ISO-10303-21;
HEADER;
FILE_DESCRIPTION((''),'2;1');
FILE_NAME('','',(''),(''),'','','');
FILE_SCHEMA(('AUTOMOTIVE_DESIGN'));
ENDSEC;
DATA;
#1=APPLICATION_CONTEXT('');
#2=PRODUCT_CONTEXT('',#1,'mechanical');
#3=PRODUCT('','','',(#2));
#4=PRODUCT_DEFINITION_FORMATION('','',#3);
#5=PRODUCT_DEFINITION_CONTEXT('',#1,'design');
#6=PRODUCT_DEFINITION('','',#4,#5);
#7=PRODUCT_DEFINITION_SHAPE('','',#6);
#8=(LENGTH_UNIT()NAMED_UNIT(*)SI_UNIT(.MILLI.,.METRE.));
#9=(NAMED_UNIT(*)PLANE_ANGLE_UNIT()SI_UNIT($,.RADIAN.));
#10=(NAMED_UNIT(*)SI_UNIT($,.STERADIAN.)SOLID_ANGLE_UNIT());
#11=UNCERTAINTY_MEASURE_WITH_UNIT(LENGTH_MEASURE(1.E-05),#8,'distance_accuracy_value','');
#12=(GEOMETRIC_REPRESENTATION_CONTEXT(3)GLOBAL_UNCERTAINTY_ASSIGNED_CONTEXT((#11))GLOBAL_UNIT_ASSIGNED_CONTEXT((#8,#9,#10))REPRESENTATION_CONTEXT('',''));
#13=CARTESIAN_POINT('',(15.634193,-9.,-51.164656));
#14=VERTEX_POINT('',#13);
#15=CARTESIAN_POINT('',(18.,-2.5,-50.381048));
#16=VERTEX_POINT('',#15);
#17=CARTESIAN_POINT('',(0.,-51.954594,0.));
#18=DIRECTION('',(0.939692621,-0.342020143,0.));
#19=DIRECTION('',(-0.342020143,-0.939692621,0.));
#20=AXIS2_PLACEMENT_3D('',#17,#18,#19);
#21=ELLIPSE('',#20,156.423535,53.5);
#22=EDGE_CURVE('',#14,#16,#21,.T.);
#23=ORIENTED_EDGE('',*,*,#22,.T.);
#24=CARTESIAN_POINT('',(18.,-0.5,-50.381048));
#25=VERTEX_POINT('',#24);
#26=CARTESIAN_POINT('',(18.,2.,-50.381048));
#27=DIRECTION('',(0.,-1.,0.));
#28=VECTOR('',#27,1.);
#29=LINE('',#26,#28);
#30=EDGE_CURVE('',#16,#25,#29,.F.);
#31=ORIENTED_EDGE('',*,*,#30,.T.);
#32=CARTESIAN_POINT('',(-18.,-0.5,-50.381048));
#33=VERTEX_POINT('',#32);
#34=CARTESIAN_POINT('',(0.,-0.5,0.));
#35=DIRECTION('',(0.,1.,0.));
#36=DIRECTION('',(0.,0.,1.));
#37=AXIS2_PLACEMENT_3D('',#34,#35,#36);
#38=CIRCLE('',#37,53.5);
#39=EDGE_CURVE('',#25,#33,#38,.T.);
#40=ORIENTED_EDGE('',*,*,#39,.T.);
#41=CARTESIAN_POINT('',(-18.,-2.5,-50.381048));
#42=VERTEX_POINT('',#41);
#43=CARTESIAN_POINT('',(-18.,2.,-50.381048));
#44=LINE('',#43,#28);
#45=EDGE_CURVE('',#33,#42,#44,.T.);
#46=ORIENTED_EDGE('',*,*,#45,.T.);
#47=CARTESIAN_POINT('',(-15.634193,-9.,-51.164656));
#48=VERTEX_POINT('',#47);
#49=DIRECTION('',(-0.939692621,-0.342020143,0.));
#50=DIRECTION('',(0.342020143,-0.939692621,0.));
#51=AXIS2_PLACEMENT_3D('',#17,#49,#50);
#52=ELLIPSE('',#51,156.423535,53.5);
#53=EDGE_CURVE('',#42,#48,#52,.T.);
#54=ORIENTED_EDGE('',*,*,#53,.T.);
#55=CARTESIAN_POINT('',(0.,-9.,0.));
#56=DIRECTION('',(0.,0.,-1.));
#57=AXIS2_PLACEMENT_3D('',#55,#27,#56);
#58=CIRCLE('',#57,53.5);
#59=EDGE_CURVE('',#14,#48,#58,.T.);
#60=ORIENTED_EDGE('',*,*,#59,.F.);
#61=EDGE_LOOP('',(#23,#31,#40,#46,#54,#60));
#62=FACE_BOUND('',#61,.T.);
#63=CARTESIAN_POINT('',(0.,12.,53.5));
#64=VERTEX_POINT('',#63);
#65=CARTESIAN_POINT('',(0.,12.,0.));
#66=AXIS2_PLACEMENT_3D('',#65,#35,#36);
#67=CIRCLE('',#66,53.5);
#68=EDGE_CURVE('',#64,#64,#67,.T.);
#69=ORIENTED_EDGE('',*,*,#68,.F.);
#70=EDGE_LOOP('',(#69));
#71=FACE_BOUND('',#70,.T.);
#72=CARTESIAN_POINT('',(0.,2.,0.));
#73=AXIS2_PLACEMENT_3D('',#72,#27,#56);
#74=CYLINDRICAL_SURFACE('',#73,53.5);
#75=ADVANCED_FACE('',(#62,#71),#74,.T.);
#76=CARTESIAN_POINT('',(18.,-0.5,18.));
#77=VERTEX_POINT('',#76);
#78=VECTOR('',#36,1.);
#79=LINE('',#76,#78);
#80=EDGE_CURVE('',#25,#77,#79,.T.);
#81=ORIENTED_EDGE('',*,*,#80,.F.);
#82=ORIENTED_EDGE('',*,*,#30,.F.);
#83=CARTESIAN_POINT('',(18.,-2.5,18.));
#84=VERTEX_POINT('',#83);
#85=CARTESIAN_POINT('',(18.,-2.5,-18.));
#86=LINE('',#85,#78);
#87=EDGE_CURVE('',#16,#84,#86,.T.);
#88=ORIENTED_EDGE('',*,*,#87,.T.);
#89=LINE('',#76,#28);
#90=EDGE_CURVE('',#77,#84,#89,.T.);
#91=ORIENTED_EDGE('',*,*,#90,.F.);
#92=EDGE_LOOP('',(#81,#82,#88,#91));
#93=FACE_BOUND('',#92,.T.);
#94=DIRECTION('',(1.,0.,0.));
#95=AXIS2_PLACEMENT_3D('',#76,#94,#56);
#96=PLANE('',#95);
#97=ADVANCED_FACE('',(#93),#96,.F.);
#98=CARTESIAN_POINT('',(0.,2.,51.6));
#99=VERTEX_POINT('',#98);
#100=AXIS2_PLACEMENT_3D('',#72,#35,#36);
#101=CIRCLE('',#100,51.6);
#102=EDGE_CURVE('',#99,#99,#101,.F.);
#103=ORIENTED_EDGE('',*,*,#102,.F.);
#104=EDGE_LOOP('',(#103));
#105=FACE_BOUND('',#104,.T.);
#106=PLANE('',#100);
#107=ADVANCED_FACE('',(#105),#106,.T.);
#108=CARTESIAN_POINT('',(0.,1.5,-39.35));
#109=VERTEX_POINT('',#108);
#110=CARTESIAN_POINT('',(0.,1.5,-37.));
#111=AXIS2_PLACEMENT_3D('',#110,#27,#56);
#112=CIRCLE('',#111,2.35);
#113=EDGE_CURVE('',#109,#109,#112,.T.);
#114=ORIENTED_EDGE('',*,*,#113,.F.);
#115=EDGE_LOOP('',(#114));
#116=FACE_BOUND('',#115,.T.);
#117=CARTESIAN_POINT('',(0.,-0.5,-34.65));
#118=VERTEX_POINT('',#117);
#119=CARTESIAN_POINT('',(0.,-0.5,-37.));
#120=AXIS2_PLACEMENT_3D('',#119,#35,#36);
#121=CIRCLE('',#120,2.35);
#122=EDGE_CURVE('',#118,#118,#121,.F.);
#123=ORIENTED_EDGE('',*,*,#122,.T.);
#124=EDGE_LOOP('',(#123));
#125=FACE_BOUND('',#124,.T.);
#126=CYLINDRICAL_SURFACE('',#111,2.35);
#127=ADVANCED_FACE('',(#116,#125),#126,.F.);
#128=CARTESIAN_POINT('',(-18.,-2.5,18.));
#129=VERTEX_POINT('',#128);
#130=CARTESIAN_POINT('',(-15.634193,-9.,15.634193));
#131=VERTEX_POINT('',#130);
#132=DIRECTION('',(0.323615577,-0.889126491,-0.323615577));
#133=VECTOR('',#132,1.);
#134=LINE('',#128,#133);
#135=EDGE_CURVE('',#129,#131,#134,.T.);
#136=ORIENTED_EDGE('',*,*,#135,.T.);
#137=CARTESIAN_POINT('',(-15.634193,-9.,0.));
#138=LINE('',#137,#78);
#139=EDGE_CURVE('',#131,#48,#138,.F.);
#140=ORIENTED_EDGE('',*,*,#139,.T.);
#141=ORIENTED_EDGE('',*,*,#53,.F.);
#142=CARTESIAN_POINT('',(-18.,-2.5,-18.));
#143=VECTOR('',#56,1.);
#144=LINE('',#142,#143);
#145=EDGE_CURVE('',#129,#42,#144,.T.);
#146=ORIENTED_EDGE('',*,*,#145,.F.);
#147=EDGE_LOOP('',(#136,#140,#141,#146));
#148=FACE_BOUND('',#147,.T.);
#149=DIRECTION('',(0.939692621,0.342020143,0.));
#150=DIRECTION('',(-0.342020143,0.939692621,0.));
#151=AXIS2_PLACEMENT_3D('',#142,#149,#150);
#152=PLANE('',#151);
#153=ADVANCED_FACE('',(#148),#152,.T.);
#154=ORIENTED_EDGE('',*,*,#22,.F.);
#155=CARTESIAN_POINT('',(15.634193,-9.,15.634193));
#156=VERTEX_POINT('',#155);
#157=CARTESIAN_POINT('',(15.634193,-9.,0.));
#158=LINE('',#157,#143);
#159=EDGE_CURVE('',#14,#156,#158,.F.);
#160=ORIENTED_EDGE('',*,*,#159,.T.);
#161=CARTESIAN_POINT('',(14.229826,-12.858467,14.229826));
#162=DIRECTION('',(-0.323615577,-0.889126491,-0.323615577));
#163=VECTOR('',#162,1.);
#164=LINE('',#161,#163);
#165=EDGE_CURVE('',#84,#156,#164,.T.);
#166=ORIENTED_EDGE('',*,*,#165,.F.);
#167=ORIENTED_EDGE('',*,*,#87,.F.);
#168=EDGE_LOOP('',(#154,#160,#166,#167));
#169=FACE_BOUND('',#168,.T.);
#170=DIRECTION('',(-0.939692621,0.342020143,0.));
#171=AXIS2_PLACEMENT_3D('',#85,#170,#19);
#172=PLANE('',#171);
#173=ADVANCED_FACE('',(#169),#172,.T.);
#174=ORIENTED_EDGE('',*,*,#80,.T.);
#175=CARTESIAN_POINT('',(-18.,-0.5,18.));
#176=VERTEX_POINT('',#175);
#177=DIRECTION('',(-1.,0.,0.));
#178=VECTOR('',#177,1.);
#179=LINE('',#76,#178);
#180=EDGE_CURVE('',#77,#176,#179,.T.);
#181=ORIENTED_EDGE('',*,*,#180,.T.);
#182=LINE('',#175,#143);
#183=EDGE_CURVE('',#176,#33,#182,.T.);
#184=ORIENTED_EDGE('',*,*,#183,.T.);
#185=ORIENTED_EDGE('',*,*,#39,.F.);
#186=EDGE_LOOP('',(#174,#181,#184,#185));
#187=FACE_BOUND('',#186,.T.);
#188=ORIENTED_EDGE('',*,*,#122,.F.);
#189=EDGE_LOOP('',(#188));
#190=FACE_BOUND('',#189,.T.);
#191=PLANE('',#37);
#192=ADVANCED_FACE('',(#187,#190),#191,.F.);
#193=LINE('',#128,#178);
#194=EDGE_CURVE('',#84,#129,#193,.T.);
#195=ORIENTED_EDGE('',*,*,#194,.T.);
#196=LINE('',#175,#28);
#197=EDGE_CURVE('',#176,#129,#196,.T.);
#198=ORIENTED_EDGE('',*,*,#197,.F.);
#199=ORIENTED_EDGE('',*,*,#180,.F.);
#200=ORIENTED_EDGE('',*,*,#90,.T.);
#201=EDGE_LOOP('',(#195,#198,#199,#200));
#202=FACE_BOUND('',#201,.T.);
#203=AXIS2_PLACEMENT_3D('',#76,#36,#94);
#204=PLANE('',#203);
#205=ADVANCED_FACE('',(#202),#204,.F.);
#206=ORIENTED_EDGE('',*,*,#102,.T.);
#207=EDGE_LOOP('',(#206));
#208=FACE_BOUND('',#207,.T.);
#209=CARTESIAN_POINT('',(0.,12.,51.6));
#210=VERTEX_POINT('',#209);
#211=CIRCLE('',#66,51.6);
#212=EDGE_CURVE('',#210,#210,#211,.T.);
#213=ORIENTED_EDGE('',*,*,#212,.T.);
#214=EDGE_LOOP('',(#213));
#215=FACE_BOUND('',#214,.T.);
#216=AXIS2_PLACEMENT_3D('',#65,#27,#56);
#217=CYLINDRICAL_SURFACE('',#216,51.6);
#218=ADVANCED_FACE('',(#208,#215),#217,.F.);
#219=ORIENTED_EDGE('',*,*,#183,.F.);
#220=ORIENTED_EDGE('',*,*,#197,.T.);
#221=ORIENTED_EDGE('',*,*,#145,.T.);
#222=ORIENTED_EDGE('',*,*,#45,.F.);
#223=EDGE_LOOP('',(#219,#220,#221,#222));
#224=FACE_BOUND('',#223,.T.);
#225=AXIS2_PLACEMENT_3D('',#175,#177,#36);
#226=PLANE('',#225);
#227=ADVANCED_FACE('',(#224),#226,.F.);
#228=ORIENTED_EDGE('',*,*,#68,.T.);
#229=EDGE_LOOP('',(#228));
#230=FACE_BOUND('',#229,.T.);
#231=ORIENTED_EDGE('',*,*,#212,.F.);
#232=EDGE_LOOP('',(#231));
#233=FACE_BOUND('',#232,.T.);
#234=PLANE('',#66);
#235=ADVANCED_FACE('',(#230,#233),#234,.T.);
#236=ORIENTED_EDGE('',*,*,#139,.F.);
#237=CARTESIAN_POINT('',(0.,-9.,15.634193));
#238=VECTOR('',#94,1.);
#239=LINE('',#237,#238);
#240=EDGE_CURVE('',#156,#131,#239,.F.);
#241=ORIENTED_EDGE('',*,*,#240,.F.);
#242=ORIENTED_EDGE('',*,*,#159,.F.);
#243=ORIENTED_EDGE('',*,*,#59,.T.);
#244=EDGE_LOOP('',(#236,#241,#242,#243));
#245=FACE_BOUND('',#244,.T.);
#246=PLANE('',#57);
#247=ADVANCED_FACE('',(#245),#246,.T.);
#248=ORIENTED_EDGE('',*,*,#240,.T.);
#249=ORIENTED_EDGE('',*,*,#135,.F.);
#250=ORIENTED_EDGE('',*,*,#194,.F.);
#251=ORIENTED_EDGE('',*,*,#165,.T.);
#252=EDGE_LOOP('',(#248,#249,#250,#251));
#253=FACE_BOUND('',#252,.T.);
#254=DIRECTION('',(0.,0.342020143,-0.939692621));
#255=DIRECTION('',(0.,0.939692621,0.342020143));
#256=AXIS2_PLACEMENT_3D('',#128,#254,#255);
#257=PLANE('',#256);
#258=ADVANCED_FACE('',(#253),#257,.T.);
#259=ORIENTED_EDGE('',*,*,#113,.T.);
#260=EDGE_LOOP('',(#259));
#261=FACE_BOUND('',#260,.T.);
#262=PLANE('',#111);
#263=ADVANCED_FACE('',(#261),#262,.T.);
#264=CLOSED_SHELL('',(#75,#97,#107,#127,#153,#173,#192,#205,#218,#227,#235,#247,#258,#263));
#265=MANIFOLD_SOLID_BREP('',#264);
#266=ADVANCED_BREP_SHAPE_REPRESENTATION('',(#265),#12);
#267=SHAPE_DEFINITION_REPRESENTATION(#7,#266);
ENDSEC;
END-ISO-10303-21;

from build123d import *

# Parameters (mm, degrees)
SKETCH1_R            = 53.5
BOSS_EXTRUDE1_DEPTH  = 2
SKETCH2_R            = 53.5
SKETCH2_R_2          = 51.6
BOSS_EXTRUDE2_DEPTH  = 10
BOSS_EXTRUDE3_START  = 9
SKETCH4_R            = 53.5
BOSS_EXTRUDE3_DEPTH  = 9
SKETCH6_W            = 36
SKETCH6_H            = 36
CUT_EXTRUDE1_DEPTH   = 6.5
CUT_EXTRUDE2_START   = -36
CUT_EXTRUDE2_DEPTH   = 36
CUT_EXTRUDE2_2_DEPTH = 36
CUT_EXTRUDE2_START_2 = -19
CUT_EXTRUDE2_3_DEPTH = 38
SKETCH14_R           = 2.35
CUT_EXTRUDE3_DEPTH   = 4
SKETCH15_W           = 36
SKETCH15_H           = 71.5
CUT_EXTRUDE4_DEPTH   = 2


with BuildPart() as part:
    # Sketch1 → Boss-Extrude1 (new body)
    with BuildSketch(Plane(origin=(0, 0, 0), x_dir=(1, 0, 0), z_dir=(0, 1, 0))):
        with Locations(Location((0, 0, 0), (0, 0, 270))):
            Circle(SKETCH1_R)
    extrude(amount=BOSS_EXTRUDE1_DEPTH)

    # Sketch2 → Boss-Extrude2 (add)
    with BuildSketch(Plane(origin=(0, 2, 0), x_dir=(1, 0, 0), z_dir=(0, 1, 0))):
        with Locations(Location((0, 0, 0), (0, 0, 270))):
            Circle(SKETCH2_R)
        with Locations(Location((0, 0, 0), (0, 0, 270))):
            Circle(SKETCH2_R_2, mode=Mode.SUBTRACT)
    extrude(amount=BOSS_EXTRUDE2_DEPTH)

    # Sketch4 → Boss-Extrude3 (add)
    with BuildSketch(Plane.XZ.offset(BOSS_EXTRUDE3_START)):
        with Locations(Location((0, 0, 0), (0, 0, 270))):
            Circle(SKETCH4_R)
    extrude(amount=-BOSS_EXTRUDE3_DEPTH)

    # Sketch6 → Cut-Extrude1 (cut)
    with BuildSketch(Plane.XZ.offset(9)):
        Rectangle(SKETCH6_W, SKETCH6_H)
    extrude(amount=-CUT_EXTRUDE1_DEPTH, mode=Mode.SUBTRACT)

    # Cut-Extrude2: read off the stored shape, not the designer's step
    # Cut-Extrude2 outline → Cut-Extrude2 (cut)
    with BuildSketch(Plane.XY.offset(-18).offset(CUT_EXTRUDE2_START)):
        Polygon((15.634193477, -9), (18, -2.5), (-18, -2.5), (-15.634193477, -9), align=None)
    extrude(amount=CUT_EXTRUDE2_DEPTH, mode=Mode.SUBTRACT)

    # Cut-Extrude2 2 outline → Cut-Extrude2 2 (add)
    with BuildSketch(Plane.XY.offset(-18)):
        Polygon((18, -9), (18, -2.5), (15.634193477, -9), align=None)
        Polygon((-15.634193477, -9), (-18, -2.5), (-18, -9), align=None)
    extrude(amount=CUT_EXTRUDE2_2_DEPTH)

    # Cut-Extrude2 3 outline → Cut-Extrude2 3 (add)
    with BuildSketch(Plane.YZ.offset(CUT_EXTRUDE2_START_2)):
        Polygon((-9, 18), (-9, 15.634193477), (-2.5, 18), align=None)
    extrude(amount=CUT_EXTRUDE2_3_DEPTH)

    # Sketch14 → Cut-Extrude3 (cut)
    with BuildSketch(Plane.XZ.offset(2.5)):
        with Locations(Location((0, -37, 0), (0, 0, 270))):
            Circle(SKETCH14_R)
    extrude(amount=-CUT_EXTRUDE3_DEPTH, mode=Mode.SUBTRACT)

    # Sketch15 → Cut-Extrude4 (cut)
    with BuildSketch(Plane.XZ.offset(2.5)):
        with Locations((0, -17.75)):
            Rectangle(SKETCH15_W, SKETCH15_H)
    extrude(amount=-CUT_EXTRUDE4_DEPTH, mode=Mode.SUBTRACT)


solid = part.part
